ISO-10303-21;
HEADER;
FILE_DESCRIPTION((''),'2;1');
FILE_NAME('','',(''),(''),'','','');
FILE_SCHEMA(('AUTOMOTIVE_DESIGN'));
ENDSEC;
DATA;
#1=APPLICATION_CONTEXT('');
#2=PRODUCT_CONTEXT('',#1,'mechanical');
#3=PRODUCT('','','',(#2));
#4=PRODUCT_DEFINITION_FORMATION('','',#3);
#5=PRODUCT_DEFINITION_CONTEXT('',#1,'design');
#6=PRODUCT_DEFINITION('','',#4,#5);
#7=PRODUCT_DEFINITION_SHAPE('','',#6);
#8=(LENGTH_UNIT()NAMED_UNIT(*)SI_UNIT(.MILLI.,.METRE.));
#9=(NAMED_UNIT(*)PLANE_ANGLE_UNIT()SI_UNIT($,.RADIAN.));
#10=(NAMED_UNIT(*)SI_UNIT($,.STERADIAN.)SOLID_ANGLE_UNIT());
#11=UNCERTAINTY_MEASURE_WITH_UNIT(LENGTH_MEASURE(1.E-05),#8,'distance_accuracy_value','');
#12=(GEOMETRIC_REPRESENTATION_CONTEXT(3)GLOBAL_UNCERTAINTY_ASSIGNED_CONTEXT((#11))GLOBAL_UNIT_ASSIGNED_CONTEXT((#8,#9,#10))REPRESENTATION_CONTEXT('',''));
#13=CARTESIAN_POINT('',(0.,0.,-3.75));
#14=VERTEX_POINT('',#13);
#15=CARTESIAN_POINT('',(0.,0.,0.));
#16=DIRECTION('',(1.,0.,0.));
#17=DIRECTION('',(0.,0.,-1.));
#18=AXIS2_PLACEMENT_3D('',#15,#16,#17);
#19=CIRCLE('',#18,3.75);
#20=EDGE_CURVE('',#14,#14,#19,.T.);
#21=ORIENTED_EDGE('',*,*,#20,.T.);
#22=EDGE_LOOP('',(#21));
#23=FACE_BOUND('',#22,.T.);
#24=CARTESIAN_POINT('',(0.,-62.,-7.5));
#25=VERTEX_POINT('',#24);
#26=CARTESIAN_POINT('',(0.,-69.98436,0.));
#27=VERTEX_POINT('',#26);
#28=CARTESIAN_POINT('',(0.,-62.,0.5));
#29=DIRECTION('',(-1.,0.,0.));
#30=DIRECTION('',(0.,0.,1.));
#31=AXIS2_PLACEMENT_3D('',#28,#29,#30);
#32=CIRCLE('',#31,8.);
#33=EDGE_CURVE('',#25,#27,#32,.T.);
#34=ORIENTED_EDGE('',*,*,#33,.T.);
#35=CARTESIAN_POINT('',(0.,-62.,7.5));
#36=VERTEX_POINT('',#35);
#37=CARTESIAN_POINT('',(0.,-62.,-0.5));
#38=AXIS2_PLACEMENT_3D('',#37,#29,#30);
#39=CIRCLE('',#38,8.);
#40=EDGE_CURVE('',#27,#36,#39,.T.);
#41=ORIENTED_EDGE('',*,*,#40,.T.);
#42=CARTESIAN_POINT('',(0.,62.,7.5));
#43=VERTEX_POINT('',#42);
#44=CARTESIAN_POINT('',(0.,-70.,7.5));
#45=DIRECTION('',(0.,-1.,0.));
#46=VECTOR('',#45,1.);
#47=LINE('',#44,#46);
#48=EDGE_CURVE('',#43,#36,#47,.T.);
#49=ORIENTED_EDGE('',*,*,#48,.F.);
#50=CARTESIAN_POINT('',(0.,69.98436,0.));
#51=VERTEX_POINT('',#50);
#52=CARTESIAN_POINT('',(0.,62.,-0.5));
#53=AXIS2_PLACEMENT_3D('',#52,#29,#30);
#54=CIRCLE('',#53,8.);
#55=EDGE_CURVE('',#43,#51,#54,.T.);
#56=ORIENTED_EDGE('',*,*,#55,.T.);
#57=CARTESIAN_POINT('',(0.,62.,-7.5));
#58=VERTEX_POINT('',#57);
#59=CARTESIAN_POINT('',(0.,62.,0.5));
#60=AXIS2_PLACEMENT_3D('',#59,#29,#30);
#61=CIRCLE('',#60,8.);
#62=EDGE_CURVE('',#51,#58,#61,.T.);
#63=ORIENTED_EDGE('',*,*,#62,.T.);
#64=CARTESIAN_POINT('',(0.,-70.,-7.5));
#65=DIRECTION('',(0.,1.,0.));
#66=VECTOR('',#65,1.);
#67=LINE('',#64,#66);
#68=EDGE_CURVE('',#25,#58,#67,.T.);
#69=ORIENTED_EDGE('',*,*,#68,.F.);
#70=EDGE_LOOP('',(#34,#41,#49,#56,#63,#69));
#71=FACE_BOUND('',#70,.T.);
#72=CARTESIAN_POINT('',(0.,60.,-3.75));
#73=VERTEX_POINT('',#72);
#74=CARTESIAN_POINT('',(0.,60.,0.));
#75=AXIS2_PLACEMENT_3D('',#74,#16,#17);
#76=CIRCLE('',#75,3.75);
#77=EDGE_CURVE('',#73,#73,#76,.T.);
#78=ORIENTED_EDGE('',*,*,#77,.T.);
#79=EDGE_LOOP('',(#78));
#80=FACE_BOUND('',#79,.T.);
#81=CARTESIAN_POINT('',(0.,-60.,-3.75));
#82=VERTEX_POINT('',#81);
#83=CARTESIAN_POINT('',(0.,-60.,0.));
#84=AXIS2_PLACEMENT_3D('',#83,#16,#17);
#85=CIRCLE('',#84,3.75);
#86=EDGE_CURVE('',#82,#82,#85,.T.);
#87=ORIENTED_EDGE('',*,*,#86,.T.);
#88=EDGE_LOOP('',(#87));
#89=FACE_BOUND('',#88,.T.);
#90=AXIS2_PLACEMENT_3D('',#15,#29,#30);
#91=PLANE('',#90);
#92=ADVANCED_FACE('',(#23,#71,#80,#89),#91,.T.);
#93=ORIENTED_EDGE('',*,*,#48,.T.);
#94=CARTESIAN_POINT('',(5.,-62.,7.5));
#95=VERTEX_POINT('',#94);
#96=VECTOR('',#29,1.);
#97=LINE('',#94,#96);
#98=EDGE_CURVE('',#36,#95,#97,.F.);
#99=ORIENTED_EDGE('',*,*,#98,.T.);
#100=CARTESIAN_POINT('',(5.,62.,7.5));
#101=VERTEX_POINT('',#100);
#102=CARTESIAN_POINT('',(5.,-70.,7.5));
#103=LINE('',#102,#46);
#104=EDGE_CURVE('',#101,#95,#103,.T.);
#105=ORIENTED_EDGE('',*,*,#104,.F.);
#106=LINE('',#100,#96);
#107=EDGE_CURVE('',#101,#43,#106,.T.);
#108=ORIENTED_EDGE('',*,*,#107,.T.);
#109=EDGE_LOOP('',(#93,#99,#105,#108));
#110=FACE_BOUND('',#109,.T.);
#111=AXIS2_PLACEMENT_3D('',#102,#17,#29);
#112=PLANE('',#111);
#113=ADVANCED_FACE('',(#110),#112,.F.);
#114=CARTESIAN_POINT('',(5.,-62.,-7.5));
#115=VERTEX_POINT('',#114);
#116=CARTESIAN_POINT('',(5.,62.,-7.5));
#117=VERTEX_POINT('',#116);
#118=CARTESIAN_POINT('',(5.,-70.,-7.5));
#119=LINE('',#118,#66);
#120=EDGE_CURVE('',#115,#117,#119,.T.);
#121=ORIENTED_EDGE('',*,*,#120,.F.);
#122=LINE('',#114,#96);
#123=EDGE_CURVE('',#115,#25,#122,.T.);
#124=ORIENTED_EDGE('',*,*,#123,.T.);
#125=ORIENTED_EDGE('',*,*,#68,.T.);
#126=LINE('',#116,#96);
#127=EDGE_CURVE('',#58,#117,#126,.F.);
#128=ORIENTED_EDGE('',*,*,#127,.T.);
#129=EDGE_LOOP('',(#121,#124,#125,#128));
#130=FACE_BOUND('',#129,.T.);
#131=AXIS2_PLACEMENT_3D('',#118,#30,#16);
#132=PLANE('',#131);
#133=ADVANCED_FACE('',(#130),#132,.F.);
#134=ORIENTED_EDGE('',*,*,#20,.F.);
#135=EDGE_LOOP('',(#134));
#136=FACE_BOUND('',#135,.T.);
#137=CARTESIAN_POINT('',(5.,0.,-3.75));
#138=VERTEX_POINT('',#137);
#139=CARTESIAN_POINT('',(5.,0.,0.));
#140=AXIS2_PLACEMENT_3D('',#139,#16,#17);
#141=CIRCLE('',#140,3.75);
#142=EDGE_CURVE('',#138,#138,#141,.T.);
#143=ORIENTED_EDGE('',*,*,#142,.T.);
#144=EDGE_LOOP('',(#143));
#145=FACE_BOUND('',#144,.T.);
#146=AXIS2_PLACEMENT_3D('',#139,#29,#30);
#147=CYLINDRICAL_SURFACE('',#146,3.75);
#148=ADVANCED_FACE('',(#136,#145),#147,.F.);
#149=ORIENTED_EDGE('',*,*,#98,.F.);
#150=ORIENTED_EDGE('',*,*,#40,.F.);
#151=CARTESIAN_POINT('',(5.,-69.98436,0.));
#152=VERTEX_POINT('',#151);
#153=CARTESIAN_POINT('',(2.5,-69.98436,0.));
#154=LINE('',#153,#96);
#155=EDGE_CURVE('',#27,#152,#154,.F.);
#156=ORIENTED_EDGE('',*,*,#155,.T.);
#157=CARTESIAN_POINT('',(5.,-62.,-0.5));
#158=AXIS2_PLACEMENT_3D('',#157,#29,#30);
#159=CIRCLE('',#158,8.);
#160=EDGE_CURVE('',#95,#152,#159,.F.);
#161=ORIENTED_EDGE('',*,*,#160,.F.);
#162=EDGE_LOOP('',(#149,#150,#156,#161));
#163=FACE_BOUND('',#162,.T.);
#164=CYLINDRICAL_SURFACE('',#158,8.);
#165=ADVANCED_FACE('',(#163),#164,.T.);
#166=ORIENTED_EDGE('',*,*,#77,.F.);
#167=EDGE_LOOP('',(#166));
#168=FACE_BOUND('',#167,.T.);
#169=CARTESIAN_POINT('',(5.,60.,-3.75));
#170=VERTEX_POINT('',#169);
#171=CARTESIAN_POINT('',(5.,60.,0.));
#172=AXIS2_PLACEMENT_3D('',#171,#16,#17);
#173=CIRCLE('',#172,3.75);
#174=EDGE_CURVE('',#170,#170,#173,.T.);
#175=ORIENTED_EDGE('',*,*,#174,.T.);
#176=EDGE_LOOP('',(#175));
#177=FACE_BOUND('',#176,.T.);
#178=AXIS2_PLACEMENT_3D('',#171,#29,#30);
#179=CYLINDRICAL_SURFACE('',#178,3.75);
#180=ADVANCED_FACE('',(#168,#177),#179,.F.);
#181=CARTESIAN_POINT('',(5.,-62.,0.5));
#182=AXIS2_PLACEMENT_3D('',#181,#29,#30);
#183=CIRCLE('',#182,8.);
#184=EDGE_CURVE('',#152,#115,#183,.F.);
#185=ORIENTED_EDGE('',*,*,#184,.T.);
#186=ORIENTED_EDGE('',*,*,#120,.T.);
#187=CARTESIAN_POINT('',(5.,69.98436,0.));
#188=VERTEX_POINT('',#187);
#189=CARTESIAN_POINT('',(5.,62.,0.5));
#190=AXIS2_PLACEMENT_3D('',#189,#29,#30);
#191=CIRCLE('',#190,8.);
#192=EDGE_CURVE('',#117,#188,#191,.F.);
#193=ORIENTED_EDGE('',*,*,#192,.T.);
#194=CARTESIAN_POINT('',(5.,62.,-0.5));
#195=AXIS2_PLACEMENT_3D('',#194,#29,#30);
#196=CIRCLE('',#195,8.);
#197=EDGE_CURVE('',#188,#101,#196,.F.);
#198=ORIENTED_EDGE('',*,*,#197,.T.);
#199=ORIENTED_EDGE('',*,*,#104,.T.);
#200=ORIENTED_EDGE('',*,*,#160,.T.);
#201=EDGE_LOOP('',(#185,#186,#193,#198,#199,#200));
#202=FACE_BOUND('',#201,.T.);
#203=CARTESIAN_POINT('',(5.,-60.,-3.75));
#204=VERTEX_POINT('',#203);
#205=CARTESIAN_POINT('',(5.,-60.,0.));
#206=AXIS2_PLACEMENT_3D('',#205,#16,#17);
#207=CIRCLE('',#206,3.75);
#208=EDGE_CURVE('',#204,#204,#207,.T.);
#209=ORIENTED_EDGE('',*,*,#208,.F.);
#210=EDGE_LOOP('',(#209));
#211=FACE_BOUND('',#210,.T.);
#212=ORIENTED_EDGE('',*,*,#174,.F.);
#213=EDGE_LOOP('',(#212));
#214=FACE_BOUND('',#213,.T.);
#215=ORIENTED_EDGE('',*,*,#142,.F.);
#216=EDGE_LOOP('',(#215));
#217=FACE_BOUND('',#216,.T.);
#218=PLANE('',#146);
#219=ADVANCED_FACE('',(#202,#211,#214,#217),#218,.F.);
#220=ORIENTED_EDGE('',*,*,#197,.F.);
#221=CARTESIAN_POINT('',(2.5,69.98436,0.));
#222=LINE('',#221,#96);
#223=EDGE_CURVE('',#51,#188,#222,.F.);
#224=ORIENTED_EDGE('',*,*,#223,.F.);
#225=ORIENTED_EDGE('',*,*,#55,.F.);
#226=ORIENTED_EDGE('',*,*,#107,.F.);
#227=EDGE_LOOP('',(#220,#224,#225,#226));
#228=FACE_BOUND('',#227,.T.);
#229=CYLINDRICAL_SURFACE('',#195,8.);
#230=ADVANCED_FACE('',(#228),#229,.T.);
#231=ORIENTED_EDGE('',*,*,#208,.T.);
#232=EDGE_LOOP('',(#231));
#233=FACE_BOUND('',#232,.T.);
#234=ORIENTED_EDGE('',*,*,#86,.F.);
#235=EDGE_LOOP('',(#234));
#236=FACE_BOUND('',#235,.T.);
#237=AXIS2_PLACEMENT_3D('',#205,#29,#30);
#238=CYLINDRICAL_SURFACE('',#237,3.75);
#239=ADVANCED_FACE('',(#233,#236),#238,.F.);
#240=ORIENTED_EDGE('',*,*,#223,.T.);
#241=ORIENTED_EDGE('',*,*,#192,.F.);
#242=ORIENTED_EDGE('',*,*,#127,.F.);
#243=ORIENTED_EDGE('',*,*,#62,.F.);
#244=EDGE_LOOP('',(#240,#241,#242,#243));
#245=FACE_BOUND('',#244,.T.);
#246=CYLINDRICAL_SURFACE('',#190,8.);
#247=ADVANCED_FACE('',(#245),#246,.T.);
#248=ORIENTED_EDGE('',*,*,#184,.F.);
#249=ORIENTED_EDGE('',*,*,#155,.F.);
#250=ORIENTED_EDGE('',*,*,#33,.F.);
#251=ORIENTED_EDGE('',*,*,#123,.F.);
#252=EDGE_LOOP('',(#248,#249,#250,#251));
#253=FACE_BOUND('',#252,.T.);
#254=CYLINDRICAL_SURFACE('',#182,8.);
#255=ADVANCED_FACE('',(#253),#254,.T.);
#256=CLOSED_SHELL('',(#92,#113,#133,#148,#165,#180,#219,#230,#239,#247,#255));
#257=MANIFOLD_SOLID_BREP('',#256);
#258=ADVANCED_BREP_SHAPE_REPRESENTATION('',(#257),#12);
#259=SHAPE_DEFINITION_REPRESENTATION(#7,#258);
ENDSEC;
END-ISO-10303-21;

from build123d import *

# Parameters (mm, degrees)
SKETCH1_W           = 15
SKETCH1_H           = 140
SKETCH1_R           = 3.75
BOSS_EXTRUDE1_DEPTH = 5
FILLET1_R           = 8


with BuildPart() as part:
    # Sketch1 → Boss-Extrude1 (new body)
    with BuildSketch(Plane(origin=(0, 0, 0), x_dir=(0, 0, -1), z_dir=(1, 0, 0))):
        Rectangle(SKETCH1_W, SKETCH1_H)
        Circle(SKETCH1_R, mode=Mode.SUBTRACT)
        with Locations((0, 60)):
            Circle(SKETCH1_R, mode=Mode.SUBTRACT)
        with Locations((0, -60)):
            Circle(SKETCH1_R, mode=Mode.SUBTRACT)
    extrude(amount=BOSS_EXTRUDE1_DEPTH)

    # Fillet1
    # the kernel refuses this fillet: 8 mm, written as the material it takes off along each edge
    with BuildSketch(Plane(origin=(-20, -70, 7.5), x_dir=(0, 0, -1), z_dir=(1, 0, 0))) as fillet1_piece_1:
        with BuildLine():
            CenterArc((FILLET1_R, FILLET1_R), FILLET1_R, 180, 90)
            Line((0, FILLET1_R), (0, 0))
            Line((0, 0), (FILLET1_R, 0))
        make_face()
    extrude(amount=45, mode=Mode.SUBTRACT)
    with BuildSketch(Plane(origin=(-20, -70, -7.5), x_dir=(0, 0, 1), z_dir=(1, 0, 0)), Plane(origin=(-20, 70, -7.5), x_dir=(0, -1, 0), z_dir=(1, 0, 0)), Plane(origin=(-20, 70, 7.5), x_dir=(0, 0, -1), z_dir=(1, 0, 0))) as fillet1_piece_2:
        with BuildLine():
            CenterArc((FILLET1_R, -FILLET1_R), FILLET1_R, 90, 90)
            Line((0, -FILLET1_R), (0, 0))
            Line((0, 0), (FILLET1_R, 0))
        make_face()
    extrude(amount=45, mode=Mode.SUBTRACT)


solid = part.part
